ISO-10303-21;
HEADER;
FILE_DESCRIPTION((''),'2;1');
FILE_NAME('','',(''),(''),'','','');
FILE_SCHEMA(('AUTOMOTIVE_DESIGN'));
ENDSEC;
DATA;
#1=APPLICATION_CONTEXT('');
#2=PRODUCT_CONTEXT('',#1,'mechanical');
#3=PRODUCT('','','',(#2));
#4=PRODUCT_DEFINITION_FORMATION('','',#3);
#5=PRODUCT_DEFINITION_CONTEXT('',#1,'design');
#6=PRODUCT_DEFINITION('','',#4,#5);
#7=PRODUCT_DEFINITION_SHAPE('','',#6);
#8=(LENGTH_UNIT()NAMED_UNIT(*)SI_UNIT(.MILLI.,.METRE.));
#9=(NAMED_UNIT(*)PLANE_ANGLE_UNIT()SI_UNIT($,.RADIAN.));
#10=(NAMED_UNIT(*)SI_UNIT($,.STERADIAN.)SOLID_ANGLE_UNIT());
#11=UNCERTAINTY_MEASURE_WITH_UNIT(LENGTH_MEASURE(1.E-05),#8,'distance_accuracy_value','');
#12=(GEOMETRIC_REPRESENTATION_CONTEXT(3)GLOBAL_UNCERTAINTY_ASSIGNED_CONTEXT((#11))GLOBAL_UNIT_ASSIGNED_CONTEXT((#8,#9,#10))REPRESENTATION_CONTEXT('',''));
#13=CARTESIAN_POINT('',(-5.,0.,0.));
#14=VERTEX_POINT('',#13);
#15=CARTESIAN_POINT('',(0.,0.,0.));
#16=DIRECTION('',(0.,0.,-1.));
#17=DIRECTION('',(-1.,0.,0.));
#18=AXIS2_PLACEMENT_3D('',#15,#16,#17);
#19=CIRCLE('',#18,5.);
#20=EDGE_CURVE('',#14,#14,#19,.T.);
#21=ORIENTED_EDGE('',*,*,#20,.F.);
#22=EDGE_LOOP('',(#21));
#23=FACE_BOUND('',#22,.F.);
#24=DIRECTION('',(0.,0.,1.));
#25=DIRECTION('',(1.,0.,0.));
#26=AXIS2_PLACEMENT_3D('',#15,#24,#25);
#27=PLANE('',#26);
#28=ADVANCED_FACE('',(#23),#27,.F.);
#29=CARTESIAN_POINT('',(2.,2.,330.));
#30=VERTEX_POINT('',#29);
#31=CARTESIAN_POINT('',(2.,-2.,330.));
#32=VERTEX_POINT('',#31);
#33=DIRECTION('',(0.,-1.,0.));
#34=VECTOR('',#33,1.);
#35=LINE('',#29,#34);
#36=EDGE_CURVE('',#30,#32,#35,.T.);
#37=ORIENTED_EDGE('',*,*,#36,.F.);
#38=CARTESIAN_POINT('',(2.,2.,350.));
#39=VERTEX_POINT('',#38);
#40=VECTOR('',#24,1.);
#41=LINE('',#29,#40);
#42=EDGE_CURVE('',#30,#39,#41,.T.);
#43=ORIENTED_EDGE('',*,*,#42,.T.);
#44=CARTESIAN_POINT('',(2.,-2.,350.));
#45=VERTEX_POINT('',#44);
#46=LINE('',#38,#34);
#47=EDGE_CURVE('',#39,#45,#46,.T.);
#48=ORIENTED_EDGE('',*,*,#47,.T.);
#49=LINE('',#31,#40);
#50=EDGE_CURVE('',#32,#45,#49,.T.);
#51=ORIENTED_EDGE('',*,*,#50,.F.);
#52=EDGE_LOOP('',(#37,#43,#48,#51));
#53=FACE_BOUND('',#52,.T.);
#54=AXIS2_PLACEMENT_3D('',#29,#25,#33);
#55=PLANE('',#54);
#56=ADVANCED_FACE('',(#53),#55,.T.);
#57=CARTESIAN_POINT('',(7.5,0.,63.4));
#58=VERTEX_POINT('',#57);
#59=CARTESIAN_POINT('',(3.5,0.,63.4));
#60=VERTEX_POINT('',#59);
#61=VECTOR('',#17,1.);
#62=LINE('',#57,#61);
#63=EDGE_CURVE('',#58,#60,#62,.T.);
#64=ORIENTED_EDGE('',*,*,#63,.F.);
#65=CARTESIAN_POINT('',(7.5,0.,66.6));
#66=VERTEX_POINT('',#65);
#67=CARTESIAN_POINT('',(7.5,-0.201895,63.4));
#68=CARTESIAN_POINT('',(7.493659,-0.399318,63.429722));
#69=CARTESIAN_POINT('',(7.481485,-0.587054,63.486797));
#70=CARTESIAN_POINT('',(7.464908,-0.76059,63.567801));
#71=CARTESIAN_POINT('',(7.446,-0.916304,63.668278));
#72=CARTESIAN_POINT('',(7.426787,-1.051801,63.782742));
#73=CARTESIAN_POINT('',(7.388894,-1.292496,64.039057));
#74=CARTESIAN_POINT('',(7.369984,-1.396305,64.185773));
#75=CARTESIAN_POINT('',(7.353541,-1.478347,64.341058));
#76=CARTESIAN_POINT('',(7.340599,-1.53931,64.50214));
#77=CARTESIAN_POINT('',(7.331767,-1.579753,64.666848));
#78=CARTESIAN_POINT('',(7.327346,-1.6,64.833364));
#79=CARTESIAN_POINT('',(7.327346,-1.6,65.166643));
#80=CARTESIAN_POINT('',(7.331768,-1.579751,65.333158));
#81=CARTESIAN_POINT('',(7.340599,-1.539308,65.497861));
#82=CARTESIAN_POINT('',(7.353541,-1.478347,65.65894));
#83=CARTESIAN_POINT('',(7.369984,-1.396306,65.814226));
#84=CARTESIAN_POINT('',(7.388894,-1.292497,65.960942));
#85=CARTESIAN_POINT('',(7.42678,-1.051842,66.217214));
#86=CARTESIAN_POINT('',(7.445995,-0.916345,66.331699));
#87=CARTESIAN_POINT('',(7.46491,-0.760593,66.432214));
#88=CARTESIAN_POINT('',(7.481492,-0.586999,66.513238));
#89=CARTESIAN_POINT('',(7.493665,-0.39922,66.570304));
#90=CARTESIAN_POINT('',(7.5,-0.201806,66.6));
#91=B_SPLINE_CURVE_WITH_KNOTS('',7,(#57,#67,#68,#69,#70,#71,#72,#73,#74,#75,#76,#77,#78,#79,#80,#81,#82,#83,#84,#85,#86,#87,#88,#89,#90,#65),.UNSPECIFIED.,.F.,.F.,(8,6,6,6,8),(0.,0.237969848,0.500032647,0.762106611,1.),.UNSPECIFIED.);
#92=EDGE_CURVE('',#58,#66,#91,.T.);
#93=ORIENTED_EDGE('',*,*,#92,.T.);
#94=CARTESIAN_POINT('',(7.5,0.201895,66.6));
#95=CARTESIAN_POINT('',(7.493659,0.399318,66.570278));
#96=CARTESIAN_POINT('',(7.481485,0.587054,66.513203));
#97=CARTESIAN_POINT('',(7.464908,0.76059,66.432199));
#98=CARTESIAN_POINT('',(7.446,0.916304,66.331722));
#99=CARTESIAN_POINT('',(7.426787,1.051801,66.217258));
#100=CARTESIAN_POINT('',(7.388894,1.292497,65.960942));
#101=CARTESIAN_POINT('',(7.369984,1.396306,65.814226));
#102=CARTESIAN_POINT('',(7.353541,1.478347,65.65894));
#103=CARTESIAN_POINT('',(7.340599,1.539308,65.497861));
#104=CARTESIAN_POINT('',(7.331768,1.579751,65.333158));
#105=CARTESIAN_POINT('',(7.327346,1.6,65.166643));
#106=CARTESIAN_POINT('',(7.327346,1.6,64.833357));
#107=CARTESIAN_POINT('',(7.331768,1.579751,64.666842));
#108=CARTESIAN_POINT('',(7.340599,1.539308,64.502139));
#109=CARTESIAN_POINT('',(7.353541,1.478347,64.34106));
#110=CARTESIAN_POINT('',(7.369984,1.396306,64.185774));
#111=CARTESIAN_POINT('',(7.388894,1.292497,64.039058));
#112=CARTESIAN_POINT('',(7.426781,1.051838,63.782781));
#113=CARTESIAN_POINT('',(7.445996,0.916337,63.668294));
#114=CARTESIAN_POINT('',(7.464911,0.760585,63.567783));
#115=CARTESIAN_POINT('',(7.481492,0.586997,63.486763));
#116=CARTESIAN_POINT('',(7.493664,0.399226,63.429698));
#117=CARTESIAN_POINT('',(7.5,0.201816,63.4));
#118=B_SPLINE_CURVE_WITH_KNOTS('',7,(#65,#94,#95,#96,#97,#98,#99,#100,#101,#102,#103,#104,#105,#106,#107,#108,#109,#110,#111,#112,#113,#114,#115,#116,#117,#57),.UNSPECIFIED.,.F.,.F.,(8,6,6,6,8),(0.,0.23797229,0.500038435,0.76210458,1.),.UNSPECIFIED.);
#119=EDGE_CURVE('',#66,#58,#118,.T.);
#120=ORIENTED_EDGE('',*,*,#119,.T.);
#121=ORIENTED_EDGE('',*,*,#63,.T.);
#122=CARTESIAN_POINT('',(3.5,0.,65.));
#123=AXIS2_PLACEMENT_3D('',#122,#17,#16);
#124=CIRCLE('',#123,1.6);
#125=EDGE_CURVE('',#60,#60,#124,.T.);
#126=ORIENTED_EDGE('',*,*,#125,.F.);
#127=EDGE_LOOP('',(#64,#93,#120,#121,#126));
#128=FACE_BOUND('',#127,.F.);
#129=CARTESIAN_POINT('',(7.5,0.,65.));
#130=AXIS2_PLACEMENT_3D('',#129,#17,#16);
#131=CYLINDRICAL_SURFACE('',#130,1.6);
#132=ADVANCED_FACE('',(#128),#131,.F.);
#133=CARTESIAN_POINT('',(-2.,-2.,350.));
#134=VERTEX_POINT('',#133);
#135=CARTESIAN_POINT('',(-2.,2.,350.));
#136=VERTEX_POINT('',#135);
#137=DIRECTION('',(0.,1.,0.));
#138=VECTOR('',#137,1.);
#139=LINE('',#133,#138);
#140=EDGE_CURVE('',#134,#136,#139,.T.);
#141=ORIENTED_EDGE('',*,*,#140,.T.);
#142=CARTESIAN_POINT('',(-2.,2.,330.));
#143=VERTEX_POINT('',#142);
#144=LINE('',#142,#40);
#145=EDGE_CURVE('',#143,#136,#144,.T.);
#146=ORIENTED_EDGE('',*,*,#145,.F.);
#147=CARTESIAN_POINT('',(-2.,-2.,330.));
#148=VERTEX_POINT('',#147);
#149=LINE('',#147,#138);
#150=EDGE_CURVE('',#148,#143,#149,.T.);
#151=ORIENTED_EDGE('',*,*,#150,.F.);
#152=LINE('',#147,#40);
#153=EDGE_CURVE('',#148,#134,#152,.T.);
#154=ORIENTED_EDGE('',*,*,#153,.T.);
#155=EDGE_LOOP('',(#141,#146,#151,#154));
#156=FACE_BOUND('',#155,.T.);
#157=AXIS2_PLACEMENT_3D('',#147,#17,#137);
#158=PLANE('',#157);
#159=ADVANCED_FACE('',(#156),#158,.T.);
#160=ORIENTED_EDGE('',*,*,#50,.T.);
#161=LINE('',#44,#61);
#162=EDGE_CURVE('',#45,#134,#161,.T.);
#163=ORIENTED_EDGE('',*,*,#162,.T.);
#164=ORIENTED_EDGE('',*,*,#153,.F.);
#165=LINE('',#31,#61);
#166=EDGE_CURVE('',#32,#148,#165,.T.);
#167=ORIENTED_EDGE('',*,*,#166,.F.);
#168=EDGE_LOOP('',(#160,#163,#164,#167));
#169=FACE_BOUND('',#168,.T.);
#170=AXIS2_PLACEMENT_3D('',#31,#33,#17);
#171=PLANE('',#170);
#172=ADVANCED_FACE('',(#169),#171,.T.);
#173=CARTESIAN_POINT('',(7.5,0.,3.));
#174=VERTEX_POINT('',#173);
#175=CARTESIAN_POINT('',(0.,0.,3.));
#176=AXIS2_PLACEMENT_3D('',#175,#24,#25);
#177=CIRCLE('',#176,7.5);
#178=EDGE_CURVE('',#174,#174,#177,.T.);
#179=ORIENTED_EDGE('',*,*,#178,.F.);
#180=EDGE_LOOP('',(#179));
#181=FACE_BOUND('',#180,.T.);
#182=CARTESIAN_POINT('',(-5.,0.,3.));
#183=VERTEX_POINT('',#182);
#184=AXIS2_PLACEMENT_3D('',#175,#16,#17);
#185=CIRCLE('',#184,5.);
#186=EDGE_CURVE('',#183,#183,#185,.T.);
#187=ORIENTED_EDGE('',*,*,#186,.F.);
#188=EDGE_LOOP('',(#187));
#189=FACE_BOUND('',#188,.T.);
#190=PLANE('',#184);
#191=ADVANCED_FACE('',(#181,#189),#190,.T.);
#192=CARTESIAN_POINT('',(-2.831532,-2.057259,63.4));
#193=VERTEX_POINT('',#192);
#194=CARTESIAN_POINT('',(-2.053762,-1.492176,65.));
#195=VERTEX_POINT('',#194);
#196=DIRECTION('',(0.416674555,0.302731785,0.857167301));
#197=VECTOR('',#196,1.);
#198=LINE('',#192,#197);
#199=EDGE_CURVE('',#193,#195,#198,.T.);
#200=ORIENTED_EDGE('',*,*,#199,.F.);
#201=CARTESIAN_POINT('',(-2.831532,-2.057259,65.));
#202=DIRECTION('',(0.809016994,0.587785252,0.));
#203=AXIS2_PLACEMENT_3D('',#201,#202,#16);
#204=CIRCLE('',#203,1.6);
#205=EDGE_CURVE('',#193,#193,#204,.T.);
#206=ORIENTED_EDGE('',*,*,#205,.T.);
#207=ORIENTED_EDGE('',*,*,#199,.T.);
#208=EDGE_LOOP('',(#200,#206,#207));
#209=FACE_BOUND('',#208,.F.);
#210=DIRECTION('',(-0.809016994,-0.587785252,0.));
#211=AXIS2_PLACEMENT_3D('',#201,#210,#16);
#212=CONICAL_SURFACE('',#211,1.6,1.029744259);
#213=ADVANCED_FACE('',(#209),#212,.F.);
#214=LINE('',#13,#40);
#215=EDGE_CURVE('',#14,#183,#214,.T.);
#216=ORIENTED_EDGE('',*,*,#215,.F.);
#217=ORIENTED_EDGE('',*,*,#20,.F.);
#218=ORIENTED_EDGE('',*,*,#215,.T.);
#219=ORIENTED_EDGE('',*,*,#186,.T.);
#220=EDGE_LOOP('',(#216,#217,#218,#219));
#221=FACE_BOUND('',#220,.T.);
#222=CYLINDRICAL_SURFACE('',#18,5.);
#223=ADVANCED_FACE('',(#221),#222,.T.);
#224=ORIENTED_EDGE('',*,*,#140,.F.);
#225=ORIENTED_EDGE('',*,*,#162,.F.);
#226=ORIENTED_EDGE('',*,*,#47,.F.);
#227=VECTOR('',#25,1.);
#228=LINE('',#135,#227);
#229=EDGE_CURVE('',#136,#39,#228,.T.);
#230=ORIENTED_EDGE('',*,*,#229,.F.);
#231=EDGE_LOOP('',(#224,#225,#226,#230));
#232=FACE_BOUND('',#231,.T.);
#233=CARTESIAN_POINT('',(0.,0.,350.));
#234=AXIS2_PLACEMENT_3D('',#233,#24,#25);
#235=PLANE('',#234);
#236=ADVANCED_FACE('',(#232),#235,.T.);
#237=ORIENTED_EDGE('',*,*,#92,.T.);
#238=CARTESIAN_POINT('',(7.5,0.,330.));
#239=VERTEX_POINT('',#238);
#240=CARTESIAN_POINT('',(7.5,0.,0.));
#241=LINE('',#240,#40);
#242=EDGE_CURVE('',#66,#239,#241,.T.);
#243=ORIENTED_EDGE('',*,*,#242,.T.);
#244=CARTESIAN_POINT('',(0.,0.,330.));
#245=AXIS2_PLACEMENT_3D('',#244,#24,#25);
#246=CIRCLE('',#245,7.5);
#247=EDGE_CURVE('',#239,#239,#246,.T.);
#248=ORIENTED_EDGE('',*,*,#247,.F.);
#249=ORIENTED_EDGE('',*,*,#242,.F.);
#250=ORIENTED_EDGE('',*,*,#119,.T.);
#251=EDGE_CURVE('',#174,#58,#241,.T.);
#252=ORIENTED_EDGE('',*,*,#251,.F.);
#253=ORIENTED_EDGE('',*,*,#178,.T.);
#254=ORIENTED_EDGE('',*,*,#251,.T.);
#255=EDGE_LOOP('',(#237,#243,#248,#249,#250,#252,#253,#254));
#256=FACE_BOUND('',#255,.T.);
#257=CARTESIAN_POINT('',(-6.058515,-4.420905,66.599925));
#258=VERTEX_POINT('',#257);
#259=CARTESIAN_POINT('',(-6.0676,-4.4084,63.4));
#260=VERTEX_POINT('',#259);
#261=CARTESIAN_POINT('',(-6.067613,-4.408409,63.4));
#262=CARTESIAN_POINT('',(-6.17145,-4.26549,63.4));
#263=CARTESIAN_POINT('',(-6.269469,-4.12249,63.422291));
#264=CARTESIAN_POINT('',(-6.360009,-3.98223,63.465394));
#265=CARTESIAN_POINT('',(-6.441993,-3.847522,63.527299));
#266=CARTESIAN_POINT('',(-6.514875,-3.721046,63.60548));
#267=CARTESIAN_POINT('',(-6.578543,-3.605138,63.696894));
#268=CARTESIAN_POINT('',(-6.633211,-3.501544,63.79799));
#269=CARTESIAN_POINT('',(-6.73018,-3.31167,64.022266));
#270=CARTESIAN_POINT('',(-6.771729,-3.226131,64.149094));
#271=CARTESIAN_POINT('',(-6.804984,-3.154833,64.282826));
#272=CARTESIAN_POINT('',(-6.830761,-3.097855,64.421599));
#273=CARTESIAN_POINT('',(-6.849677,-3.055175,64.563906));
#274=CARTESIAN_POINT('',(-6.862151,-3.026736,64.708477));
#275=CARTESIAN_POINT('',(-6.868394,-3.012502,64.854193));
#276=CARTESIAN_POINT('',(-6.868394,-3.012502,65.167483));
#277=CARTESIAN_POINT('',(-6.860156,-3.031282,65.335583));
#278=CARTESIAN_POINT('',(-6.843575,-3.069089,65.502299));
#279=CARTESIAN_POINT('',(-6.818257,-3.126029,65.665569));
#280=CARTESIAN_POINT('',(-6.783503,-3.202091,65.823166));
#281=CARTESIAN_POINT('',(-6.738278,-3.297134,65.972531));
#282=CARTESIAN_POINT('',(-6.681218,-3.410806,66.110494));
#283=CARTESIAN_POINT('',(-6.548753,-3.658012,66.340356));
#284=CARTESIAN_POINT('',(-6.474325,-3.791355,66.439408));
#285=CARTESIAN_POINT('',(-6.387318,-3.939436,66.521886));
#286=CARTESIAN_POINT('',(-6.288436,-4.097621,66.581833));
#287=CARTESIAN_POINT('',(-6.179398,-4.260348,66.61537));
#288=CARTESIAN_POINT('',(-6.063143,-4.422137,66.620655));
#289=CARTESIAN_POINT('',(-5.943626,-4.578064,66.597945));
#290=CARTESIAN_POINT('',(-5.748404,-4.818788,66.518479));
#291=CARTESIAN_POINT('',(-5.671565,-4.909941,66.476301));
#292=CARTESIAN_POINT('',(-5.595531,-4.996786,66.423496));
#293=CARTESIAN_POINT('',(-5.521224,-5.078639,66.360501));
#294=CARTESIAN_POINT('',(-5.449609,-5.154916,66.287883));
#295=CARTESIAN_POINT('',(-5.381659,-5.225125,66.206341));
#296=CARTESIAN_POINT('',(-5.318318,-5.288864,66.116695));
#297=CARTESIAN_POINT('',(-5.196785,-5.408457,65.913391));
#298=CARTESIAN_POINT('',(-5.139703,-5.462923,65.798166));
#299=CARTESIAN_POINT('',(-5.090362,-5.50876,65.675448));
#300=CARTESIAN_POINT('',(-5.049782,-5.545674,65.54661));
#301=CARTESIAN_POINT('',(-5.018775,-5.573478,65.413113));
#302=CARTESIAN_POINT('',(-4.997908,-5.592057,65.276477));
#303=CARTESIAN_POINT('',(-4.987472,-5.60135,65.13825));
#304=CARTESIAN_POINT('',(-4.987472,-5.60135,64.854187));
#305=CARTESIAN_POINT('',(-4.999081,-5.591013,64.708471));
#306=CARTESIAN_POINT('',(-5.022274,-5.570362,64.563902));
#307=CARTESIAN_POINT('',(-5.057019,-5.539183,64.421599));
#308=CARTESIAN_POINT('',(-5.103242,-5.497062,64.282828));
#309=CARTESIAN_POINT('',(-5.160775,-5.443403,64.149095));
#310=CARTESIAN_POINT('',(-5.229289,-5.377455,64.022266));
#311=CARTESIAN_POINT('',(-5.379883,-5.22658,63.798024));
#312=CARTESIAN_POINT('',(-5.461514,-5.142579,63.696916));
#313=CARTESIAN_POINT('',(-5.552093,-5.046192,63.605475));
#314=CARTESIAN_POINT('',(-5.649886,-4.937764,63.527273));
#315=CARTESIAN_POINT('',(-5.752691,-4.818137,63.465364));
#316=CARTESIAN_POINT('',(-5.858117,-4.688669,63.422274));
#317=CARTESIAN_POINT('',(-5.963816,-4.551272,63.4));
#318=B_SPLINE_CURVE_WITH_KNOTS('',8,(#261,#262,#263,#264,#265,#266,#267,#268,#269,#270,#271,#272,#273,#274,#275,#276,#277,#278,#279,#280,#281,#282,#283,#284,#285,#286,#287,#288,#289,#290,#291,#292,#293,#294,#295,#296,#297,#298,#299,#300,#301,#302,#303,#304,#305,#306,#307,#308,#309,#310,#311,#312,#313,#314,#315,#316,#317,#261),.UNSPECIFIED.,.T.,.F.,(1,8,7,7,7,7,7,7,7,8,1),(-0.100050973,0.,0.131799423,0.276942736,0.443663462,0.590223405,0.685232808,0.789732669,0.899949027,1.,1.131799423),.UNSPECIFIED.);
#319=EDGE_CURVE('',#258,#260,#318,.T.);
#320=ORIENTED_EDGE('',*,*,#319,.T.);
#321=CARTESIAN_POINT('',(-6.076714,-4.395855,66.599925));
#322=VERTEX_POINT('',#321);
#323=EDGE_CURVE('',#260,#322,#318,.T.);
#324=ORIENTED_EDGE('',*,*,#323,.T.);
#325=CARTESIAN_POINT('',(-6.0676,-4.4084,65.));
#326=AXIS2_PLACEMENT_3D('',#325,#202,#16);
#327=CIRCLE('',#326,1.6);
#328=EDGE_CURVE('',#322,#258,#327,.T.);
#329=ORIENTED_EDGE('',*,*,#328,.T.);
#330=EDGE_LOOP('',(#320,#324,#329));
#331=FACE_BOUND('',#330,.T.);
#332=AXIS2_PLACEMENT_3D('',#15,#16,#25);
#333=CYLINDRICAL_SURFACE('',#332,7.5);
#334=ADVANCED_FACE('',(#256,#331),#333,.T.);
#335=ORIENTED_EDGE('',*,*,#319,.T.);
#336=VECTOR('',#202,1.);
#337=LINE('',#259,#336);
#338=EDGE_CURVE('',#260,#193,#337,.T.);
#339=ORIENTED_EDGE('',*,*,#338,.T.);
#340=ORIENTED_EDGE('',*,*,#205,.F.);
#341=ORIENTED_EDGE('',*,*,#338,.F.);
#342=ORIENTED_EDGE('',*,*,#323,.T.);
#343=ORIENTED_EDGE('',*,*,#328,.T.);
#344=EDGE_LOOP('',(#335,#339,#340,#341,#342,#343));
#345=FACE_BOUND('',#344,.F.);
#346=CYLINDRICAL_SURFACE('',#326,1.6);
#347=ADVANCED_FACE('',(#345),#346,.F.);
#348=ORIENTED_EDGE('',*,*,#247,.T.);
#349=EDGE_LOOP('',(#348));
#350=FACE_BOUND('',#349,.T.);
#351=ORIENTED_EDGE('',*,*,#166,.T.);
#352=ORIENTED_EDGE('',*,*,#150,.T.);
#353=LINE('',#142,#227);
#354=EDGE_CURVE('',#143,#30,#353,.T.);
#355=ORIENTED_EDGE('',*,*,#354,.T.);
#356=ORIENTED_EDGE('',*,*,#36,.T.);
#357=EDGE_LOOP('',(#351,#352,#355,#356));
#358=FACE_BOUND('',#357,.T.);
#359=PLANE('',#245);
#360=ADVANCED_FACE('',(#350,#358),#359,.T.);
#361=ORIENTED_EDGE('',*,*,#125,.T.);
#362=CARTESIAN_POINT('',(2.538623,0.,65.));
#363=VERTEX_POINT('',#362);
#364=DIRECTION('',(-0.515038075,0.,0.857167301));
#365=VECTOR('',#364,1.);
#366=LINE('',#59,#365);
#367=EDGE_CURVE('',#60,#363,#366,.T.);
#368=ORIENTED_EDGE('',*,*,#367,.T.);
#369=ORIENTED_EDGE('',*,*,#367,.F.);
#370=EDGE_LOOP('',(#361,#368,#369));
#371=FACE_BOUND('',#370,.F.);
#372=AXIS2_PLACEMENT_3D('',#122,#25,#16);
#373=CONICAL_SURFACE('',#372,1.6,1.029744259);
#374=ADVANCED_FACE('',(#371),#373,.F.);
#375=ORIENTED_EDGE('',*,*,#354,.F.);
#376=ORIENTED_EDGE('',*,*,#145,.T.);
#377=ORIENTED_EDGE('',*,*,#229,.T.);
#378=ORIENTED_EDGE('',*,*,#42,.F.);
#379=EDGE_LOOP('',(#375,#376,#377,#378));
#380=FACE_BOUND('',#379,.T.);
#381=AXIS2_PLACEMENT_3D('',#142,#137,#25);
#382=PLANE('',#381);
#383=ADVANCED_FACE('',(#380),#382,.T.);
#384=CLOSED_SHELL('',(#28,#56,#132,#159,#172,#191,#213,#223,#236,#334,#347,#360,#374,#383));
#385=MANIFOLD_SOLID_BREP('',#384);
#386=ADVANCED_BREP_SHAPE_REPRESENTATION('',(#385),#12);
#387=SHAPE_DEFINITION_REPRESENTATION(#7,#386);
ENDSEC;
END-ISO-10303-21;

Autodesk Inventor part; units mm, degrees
ref_plane "YZ Plane" through (0, 0, 0) normal (1, 0, 0) x (0, 1, 0)
sketch "Skizze1" plane through (0, 0, 0) normal (0, 0, 1) x (1, 0, 0)
  circle A0 centre (0, 0) radius 7.5
  dimension "d0" = 15
extrude "Extrusion1" add sketch "Skizze1" along normal blind 330
sketch "Skizze2" plane through (0, 0, 330) normal (0, 0, 1) x (1, 0, 0)
  point P0 (0, 0)
sketch "Skizze5" plane through (0, 0, 330) normal (0, 0, 1) x (1, 0, 0)
  line L0 (0, 0) -> (0, 2)
  line L1 (0, 2) -> (2, 2)
  line L2 (2, 2) -> (2, -2)
  line L3 (2, -2) -> (-2, -2)
  line L4 (-2, -2) -> (-2, 2)
  line L5 (-2, 2) -> (0, 2)
  dimension "d8" = 2
  dimension "d9" = 2
  dimension "d10" = 4
  dimension "d11" = 4
  dimension "d12" = 4
extrude "Extrusion4" add sketch "Skizze5" along normal blind 20
sketch "Skizze6" plane through (0, 0, 330) normal (0, 0, 1) x (1, 0, 0)
  line L0 (0, 0) -> (-6.0676, -4.4084)
  circle A0 centre (0, 0) radius 7.5 projected
  line L1 (0, 0) -> (7.5, 0) construction
  line L2 (0, 0) -> (7.5, 0)
  line L3 (2, -2) -> (2, 2) projected
  dimension "d15" = 144
ref_plane "Arbeitsebene1" through (-6.0676, -4.4084, 330) normal (-0.809017, -0.5877853, 0) x (0.5877853, -0.809017, 0)
sketch "Skizze7" plane through (-6.0676, -4.4084, 330) normal (-0.809017, -0.5877853, 0) x (0.5877853, -0.809017, 0)
  line L0 (7.5, 0) -> (-7.5, 0) projected
  line L1 (0, 0) -> (0, -265)
  line L2 (-15, -336) -> (15, -336) projected
  point P0 (0, -330)
  dimension "d16" = 265
hole "Bohrung1" at (-6.0676, -4.4084, 65) direction (0.809017, 0.5877853, 0) diameter 3.2 depth 4 tip angle 118
ref_plane "Arbeitsebene2" through (7.5, 0, 330) normal (1, 0, 0) x (0, 1, 0)
sketch "Skizze8" plane through (7.5, 0, 330) normal (1, 0, 0) x (0, 1, 0)
  line L0 (7.5, 0) -> (-7.5, 0) projected
  line L1 (0, 0) -> (0, -265)
  point P0 (0, -330)
  dimension "d24" = 265
hole "Bohrung2" at (7.5, 0, 65) direction (-1, 0, 0) diameter 3.2 depth 4 tip angle 118
sketch "Skizze9" plane through (0, 0, 0) normal (0, 0, -1) x (-1, 0, 0)
  circle A0 centre (0, 0) radius 5
  circle A1 centre (0, 0) radius 7.5
  dimension "d32" = 10
extrude "Extrusion5" cut sketch "Skizze9" against normal blind 3
properties part number "Welle" material "Stahl"
